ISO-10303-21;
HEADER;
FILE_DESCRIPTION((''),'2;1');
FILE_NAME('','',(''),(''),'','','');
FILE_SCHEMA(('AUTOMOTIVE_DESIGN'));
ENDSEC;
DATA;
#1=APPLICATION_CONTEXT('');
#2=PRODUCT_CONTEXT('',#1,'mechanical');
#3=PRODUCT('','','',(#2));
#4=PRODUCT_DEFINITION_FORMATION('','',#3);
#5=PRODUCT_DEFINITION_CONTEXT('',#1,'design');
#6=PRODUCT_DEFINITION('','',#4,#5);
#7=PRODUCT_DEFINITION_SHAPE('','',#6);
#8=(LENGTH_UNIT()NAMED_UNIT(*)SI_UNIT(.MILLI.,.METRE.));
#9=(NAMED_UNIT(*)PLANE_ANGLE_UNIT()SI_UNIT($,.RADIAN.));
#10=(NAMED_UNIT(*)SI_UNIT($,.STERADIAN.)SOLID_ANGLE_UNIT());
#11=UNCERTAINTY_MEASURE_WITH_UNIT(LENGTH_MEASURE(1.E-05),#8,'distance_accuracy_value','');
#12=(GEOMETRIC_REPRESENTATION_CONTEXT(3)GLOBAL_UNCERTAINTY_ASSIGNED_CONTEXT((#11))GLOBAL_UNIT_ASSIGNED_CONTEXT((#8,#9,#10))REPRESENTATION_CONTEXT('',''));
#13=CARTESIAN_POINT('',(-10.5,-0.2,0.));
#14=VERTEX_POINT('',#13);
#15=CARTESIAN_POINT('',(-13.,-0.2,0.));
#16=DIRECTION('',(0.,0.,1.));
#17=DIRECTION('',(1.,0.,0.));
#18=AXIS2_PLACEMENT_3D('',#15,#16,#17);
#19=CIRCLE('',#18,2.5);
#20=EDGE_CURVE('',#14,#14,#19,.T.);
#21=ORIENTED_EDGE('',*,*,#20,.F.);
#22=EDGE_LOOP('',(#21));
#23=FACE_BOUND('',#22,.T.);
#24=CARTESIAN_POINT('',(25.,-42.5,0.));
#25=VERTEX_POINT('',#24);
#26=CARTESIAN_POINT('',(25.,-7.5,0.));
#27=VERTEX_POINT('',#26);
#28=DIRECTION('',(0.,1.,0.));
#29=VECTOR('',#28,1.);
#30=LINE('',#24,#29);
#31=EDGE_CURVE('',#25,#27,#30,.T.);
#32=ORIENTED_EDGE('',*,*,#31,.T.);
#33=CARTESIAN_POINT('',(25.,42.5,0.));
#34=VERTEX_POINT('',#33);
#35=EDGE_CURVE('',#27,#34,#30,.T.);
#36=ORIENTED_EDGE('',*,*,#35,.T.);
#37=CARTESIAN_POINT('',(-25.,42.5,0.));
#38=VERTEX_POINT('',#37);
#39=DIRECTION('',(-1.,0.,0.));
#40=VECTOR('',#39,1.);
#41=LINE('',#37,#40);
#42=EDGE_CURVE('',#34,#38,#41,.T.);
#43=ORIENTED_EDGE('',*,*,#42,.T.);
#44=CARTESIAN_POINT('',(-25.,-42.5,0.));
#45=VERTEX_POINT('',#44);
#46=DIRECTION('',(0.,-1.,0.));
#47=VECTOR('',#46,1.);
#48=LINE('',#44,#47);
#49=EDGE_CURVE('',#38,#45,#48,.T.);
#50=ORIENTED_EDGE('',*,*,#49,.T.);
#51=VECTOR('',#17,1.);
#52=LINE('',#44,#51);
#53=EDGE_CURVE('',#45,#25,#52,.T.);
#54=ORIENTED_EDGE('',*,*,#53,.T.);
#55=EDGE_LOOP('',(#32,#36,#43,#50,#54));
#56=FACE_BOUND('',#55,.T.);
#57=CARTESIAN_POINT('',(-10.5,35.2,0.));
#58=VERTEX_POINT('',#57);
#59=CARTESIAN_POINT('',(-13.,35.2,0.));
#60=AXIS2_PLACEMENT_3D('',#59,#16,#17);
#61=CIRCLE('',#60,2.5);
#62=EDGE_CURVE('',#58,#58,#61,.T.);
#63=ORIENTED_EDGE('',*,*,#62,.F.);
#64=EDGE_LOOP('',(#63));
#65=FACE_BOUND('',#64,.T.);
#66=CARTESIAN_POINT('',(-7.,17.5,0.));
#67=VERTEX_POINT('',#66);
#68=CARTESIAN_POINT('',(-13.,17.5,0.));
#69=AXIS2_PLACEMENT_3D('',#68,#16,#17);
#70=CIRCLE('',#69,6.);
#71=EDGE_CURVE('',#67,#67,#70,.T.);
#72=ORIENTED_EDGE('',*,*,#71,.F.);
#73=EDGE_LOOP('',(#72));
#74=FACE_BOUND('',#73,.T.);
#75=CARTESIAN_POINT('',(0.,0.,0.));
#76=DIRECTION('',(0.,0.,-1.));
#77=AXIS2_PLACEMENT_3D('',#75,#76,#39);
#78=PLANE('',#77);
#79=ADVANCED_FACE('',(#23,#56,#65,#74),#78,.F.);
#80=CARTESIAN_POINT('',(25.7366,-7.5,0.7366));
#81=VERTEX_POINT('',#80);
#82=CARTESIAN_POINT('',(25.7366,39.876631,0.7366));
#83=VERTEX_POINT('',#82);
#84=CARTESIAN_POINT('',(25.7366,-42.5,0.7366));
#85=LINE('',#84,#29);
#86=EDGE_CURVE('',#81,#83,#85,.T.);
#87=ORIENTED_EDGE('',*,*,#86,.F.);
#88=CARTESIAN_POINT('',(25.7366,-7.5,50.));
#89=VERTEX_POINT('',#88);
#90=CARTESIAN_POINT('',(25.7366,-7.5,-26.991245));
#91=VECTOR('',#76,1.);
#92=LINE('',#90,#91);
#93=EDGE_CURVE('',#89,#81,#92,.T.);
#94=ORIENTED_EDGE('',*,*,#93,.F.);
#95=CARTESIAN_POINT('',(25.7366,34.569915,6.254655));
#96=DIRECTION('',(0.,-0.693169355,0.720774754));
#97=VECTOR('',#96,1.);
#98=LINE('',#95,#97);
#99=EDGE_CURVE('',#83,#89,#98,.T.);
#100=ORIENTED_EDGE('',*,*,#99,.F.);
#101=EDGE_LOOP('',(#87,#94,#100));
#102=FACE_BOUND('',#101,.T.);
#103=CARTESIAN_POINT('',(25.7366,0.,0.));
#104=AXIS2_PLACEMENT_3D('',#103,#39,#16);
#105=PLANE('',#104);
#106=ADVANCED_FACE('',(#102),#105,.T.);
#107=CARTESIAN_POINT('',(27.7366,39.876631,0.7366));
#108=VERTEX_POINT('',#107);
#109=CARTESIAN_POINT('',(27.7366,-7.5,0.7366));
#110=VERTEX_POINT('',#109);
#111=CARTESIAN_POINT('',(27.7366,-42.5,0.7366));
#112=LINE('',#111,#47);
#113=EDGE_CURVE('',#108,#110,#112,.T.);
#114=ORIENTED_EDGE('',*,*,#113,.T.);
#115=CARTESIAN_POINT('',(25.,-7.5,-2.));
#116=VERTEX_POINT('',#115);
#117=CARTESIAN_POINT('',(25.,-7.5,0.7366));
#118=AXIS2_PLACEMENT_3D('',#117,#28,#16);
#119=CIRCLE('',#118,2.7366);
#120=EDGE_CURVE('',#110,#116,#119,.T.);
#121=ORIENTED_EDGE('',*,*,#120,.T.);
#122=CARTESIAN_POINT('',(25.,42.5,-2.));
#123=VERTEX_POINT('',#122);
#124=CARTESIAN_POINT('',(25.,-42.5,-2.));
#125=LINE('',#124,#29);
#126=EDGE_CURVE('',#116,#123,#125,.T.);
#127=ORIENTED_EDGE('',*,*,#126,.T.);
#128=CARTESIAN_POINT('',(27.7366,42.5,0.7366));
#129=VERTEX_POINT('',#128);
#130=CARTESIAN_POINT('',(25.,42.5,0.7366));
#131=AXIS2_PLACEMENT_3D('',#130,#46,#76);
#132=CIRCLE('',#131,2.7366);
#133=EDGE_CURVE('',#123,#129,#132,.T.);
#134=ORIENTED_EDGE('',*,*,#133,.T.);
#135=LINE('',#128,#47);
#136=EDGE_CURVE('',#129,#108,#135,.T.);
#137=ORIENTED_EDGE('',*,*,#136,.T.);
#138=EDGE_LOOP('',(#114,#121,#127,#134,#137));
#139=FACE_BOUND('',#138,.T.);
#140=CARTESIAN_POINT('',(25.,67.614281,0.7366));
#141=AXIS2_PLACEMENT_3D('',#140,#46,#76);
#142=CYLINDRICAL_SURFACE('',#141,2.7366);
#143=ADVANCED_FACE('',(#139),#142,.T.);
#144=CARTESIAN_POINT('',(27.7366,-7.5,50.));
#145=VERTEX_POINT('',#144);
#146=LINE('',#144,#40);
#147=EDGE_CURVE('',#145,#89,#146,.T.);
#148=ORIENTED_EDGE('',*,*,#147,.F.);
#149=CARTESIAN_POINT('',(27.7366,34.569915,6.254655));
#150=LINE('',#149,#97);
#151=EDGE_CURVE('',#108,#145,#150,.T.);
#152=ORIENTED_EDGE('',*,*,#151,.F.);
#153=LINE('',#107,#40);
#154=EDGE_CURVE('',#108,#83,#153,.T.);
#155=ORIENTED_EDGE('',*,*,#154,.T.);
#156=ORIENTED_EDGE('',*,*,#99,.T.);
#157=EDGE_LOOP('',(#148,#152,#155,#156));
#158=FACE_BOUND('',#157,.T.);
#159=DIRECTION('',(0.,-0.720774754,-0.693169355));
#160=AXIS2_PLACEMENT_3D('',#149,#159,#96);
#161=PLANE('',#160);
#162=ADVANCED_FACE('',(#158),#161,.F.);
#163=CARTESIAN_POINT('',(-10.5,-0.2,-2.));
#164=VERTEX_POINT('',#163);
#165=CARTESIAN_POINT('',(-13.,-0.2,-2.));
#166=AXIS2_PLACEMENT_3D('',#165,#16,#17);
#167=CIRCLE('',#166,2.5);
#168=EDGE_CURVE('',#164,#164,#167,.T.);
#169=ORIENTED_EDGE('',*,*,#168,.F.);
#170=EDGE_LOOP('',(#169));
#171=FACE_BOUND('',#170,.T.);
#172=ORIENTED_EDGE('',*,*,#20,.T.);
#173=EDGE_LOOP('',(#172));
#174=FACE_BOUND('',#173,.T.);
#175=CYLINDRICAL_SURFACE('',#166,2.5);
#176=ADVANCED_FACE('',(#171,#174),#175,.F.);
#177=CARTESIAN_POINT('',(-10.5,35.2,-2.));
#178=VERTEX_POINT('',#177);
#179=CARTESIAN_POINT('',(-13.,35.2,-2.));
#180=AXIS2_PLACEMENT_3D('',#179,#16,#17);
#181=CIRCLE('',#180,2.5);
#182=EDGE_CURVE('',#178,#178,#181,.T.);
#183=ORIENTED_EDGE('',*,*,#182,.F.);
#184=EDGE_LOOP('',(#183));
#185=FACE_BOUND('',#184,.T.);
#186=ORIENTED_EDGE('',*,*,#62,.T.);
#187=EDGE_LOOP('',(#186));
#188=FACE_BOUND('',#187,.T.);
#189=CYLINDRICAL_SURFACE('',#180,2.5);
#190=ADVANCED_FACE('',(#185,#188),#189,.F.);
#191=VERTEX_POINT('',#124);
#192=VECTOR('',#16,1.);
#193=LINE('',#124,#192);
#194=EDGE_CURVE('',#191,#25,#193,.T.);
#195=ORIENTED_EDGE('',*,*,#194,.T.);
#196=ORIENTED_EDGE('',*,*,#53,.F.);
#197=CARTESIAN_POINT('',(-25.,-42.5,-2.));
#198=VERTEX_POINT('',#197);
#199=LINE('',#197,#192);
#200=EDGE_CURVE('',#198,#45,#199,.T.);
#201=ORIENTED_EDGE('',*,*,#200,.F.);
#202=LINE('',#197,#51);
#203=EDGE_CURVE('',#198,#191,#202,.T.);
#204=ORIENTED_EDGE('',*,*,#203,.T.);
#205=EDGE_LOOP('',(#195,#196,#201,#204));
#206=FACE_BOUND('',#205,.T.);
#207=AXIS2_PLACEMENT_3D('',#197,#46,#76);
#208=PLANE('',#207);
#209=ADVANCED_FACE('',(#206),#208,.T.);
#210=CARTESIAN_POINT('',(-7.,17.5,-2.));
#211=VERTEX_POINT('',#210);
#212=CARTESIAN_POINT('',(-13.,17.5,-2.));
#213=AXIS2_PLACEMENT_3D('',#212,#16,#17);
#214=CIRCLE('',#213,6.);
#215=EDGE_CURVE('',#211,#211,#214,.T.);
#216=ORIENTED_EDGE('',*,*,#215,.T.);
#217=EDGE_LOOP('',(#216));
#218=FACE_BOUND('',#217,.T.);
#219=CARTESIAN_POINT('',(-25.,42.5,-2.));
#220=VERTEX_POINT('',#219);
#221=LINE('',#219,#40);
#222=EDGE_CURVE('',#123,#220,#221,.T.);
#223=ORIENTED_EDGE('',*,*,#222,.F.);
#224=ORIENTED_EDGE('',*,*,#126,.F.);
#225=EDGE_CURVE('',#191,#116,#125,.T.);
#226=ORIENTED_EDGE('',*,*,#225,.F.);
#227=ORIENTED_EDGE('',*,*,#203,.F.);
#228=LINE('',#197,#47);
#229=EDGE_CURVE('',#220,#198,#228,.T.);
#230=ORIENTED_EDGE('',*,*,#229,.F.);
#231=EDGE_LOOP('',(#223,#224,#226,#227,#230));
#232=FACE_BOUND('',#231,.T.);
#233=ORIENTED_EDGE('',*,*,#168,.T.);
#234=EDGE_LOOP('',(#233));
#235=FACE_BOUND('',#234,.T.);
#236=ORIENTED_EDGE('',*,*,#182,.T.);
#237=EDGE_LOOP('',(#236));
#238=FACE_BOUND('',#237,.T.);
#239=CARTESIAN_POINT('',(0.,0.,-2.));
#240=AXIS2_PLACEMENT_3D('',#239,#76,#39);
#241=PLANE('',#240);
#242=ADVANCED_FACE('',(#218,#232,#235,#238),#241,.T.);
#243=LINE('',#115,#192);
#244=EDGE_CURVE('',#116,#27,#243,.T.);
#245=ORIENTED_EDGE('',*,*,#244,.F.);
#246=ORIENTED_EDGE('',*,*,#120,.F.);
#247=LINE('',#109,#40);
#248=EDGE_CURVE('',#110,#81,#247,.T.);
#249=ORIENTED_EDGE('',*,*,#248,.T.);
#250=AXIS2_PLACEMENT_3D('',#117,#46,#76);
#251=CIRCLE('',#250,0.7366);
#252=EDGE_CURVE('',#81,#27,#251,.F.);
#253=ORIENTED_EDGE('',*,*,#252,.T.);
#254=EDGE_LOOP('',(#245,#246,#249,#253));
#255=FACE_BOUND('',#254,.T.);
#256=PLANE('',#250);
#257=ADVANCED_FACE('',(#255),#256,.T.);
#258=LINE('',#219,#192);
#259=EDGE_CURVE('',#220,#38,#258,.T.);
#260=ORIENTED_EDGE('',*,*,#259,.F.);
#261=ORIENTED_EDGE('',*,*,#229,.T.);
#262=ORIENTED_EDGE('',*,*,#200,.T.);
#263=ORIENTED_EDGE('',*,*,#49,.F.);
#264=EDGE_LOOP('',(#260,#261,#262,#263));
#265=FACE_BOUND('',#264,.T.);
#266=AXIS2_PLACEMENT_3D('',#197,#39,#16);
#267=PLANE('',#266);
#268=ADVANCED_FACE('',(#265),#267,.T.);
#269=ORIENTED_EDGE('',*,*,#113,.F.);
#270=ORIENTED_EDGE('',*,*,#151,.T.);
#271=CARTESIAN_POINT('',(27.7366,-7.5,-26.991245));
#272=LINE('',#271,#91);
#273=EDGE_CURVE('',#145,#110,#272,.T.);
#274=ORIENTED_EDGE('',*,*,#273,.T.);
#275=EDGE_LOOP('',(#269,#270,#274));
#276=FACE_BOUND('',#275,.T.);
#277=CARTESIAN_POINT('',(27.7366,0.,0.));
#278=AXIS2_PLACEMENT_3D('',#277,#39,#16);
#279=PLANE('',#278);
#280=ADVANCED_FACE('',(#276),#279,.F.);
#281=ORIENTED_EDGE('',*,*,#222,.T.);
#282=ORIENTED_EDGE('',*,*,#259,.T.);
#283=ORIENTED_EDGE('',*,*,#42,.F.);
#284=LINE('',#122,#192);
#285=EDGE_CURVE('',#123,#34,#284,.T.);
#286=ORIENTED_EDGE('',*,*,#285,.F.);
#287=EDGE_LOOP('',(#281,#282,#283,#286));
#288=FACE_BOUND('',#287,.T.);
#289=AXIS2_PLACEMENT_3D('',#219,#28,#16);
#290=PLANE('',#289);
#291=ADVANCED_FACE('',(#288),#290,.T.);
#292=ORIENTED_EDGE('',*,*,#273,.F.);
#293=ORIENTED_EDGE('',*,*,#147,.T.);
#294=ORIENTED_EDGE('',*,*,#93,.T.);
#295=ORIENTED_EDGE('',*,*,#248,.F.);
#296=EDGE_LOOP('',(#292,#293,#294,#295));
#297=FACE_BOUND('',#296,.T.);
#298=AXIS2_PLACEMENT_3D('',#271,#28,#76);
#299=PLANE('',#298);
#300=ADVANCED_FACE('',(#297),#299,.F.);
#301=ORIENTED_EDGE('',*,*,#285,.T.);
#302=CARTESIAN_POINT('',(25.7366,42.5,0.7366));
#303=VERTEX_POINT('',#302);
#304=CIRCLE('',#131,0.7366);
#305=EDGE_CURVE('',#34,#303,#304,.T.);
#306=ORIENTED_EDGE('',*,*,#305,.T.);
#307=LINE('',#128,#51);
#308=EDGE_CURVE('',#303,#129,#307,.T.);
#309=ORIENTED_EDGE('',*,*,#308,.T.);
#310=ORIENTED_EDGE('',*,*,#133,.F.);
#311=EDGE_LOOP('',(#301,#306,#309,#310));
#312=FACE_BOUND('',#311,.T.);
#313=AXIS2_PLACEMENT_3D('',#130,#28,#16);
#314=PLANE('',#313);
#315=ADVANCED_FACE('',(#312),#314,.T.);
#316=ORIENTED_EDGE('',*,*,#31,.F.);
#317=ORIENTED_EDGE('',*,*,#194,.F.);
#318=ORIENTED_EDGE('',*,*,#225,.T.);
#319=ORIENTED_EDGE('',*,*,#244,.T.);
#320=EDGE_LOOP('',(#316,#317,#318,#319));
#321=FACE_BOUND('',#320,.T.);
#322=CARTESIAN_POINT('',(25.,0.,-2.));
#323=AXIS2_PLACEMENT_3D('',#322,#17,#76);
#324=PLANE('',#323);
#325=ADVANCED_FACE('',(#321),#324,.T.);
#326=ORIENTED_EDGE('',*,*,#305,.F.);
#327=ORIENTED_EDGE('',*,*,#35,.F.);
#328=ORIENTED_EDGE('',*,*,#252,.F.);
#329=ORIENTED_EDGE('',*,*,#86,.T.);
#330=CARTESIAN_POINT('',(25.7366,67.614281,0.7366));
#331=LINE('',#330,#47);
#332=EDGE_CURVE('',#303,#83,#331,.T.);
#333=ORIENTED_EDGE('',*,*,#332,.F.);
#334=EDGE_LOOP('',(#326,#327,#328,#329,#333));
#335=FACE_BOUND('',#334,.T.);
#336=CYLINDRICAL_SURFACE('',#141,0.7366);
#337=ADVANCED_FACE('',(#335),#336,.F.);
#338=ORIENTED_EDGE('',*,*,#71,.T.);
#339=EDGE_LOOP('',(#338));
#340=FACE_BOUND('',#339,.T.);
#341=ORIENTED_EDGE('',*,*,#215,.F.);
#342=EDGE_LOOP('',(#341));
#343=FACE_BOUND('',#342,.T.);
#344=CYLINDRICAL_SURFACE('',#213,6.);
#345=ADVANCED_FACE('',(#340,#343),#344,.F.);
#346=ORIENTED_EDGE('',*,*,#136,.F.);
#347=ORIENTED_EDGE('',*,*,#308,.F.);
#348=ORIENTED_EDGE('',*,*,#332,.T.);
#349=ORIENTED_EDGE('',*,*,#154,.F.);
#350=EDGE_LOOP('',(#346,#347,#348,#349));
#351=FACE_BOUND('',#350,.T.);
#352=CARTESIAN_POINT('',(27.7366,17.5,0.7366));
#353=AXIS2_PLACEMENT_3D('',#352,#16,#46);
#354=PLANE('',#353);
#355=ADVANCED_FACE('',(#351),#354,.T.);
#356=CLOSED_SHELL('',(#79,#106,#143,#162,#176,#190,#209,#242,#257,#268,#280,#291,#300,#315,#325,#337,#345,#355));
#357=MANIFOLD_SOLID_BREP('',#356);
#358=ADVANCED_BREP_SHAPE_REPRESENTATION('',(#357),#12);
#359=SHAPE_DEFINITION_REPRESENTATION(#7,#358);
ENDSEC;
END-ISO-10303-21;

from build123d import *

# Parameters (mm, degrees)
CROQUIS1_W             = 50
CROQUIS1_H             = 85
BRIDA_BASE1_DEPTH      = 2
BRIDA_DE_ARISTA1_DEPTH = 85
DESDOBLAR1_START       = -42.5
DESDOBLAR1_DEPTH       = 85
DESDOBLAR1_2_DEPTH     = 85
CROQUIS9_W             = 49.2634
CROQUIS9_H             = 35
CROQUIS9_W_2           = 2.727844901
CORTAR_EXTRUIR1_DEPTH  = 10
DOBLAR1_START          = -7.5
DOBLAR1_DEPTH          = 50
DOBLAR1_2_DEPTH        = 50
DOBLAR1_START_2        = 27.727844901
DOBLAR1_3_DEPTH        = 50.272155099
DOBLAR1_START_3        = 25.7366
DOBLAR1_4_DEPTH        = 2
CROQUIS11_R            = 6
CROQUIS11_R_2          = 2.5
CORTAR_EXTRUIR2_DEPTH  = 10


with BuildPart() as part:
    # Brida base1: sheet metal written as solids
    # Croquis1 → Brida base1 (new body)
    with BuildSketch(Plane.XY):
        Rectangle(CROQUIS1_W, CROQUIS1_H)
    extrude(amount=-BRIDA_BASE1_DEPTH)

    # Brida de arista1: sheet metal written as solids
    # Brida de arista1 section (on a plane across the edge) → Brida de arista1 (add)
    with BuildSketch(Plane(origin=(25.7366, -42.5, 0), x_dir=(-1, 0, 0), z_dir=(0, 1, 0))):
        with BuildLine():
            Line((-2, 0.7366), (-2, 50))
            Line((-2, 50), (0, 50))
            Line((0, 50), (0, 0.7366))
            ThreePointArc((0, 0.7366), (0.215745145, 0.215745145), (0.7366, 0))
            Line((0.7366, 0), (0.7366, -2))
            ThreePointArc((0.7366, -2), (-1.198468417, -1.198468417), (-2, 0.7366))
        make_face()
    extrude(amount=BRIDA_DE_ARISTA1_DEPTH)

    # Desdoblar1: read off the stored shape, not the designer's step
    # Desdoblar1 outline → Desdoblar1 (cut)
    with BuildSketch(Plane(origin=(0, 0, 0), x_dir=(1, 0, 0), z_dir=(0, 1, 0)).offset(DESDOBLAR1_START)):
        with BuildLine():
            ThreePointArc((27.7366, -0.7366), (27.711233029, -0.364854094), (27.635602398, 0))
            Line((27.635602398, 0), (25, 0))
            ThreePointArc((25, 0), (25.520854855, -0.215745145), (25.7366, -0.7366))
            Line((25.7366, -0.7366), (25.7366, -50))
            Line((25.7366, -50), (27.7366, -50))
            Line((27.7366, -50), (27.7366, -0.7366))
        make_face()
    extrude(amount=DESDOBLAR1_DEPTH, mode=Mode.SUBTRACT)

    # Desdoblar1 2 outline → Desdoblar1 2 (add)
    with BuildSketch(Plane(origin=(0, 0, 0), x_dir=(1, 0, 0), z_dir=(0, 1, 0)).offset(DESDOBLAR1_START)):
        with BuildLine():
            Line((76.991244901, 2), (25, 2))
            ThreePointArc((25, 2), (26.654267209, 1.443395312), (27.635602398, 0))
            Line((27.635602398, 0), (76.991244901, 0))
            Line((76.991244901, 0), (76.991244901, 2))
        make_face()
    extrude(amount=DESDOBLAR1_2_DEPTH)

    # Croquis9 → Cortar-Extruir1 (cut)
    with BuildSketch(Plane.XY):
        Polygon((27.727844901, 39.876630521), (76.991244901, -7.5), (76.991244901, 42.5), (27.727844901, 42.5), align=None)
        with Locations((52.359544901, -25)):
            Rectangle(CROQUIS9_W, CROQUIS9_H)
        with Locations((26.36392245, -25)):
            Rectangle(CROQUIS9_W_2, CROQUIS9_H)
    extrude(amount=-CORTAR_EXTRUIR1_DEPTH, mode=Mode.SUBTRACT)

    # Doblar1: read off the stored shape, not the designer's step
    # Doblar1 outline → Doblar1 (cut)
    with BuildSketch(Plane(origin=(0, 0, 0), x_dir=(1, 0, 0), z_dir=(0, 1, 0)).offset(DOBLAR1_START)):
        with BuildLine():
            ThreePointArc((25, 2), (26.654267209, 1.443395312), (27.635602398, 0))
            Line((27.635602398, 0), (27.727844901, 0))
            Line((27.727844901, 0), (27.727844901, 2))
            Line((27.727844901, 2), (25, 2))
        make_face()
    extrude(amount=DOBLAR1_DEPTH, mode=Mode.SUBTRACT)

    # Doblar1 2 outline → Doblar1 2 (add)
    with BuildSketch(Plane(origin=(0, 0, 0), x_dir=(1, 0, 0), z_dir=(0, 1, 0)).offset(DOBLAR1_START)):
        with BuildLine():
            ThreePointArc((25, 0), (25.520854855, -0.215745145), (25.7366, -0.7366))
            Line((25.7366, -0.7366), (27.7366, -0.7366))
            ThreePointArc((27.7366, -0.7366), (27.711233029, -0.364854094), (27.635602398, 0))
            Line((27.635602398, 0), (25, 0))
        make_face()
    extrude(amount=DOBLAR1_2_DEPTH)

    # Doblar1 3 outline → Doblar1 3 (cut)
    with BuildSketch(Plane.YZ.offset(DOBLAR1_START_2)):
        Polygon((42.508419782, -2), (40.585019021, 0), (-7.5, 0), (-7.5, -2), align=None)
    extrude(amount=DOBLAR1_3_DEPTH, mode=Mode.SUBTRACT)

    # Doblar1 4 outline → Doblar1 4 (add)
    with BuildSketch(Plane.YZ.offset(DOBLAR1_START_3)):
        Polygon((-7.5, 50), (-7.5, 0.7366), (39.876630521, 0.7366), align=None)
    extrude(amount=DOBLAR1_4_DEPTH)

    # Croquis11 → Cortar-Extruir2 (cut)
    with BuildSketch(Plane.XY):
        with Locations((-13, 17.5)):
            Circle(CROQUIS11_R)
        with Locations((-13, -0.2)):
            Circle(CROQUIS11_R_2)
        with Locations((-13, 35.2)):
            Circle(CROQUIS11_R_2)
    extrude(amount=-CORTAR_EXTRUIR2_DEPTH, mode=Mode.SUBTRACT)


solid = part.part
